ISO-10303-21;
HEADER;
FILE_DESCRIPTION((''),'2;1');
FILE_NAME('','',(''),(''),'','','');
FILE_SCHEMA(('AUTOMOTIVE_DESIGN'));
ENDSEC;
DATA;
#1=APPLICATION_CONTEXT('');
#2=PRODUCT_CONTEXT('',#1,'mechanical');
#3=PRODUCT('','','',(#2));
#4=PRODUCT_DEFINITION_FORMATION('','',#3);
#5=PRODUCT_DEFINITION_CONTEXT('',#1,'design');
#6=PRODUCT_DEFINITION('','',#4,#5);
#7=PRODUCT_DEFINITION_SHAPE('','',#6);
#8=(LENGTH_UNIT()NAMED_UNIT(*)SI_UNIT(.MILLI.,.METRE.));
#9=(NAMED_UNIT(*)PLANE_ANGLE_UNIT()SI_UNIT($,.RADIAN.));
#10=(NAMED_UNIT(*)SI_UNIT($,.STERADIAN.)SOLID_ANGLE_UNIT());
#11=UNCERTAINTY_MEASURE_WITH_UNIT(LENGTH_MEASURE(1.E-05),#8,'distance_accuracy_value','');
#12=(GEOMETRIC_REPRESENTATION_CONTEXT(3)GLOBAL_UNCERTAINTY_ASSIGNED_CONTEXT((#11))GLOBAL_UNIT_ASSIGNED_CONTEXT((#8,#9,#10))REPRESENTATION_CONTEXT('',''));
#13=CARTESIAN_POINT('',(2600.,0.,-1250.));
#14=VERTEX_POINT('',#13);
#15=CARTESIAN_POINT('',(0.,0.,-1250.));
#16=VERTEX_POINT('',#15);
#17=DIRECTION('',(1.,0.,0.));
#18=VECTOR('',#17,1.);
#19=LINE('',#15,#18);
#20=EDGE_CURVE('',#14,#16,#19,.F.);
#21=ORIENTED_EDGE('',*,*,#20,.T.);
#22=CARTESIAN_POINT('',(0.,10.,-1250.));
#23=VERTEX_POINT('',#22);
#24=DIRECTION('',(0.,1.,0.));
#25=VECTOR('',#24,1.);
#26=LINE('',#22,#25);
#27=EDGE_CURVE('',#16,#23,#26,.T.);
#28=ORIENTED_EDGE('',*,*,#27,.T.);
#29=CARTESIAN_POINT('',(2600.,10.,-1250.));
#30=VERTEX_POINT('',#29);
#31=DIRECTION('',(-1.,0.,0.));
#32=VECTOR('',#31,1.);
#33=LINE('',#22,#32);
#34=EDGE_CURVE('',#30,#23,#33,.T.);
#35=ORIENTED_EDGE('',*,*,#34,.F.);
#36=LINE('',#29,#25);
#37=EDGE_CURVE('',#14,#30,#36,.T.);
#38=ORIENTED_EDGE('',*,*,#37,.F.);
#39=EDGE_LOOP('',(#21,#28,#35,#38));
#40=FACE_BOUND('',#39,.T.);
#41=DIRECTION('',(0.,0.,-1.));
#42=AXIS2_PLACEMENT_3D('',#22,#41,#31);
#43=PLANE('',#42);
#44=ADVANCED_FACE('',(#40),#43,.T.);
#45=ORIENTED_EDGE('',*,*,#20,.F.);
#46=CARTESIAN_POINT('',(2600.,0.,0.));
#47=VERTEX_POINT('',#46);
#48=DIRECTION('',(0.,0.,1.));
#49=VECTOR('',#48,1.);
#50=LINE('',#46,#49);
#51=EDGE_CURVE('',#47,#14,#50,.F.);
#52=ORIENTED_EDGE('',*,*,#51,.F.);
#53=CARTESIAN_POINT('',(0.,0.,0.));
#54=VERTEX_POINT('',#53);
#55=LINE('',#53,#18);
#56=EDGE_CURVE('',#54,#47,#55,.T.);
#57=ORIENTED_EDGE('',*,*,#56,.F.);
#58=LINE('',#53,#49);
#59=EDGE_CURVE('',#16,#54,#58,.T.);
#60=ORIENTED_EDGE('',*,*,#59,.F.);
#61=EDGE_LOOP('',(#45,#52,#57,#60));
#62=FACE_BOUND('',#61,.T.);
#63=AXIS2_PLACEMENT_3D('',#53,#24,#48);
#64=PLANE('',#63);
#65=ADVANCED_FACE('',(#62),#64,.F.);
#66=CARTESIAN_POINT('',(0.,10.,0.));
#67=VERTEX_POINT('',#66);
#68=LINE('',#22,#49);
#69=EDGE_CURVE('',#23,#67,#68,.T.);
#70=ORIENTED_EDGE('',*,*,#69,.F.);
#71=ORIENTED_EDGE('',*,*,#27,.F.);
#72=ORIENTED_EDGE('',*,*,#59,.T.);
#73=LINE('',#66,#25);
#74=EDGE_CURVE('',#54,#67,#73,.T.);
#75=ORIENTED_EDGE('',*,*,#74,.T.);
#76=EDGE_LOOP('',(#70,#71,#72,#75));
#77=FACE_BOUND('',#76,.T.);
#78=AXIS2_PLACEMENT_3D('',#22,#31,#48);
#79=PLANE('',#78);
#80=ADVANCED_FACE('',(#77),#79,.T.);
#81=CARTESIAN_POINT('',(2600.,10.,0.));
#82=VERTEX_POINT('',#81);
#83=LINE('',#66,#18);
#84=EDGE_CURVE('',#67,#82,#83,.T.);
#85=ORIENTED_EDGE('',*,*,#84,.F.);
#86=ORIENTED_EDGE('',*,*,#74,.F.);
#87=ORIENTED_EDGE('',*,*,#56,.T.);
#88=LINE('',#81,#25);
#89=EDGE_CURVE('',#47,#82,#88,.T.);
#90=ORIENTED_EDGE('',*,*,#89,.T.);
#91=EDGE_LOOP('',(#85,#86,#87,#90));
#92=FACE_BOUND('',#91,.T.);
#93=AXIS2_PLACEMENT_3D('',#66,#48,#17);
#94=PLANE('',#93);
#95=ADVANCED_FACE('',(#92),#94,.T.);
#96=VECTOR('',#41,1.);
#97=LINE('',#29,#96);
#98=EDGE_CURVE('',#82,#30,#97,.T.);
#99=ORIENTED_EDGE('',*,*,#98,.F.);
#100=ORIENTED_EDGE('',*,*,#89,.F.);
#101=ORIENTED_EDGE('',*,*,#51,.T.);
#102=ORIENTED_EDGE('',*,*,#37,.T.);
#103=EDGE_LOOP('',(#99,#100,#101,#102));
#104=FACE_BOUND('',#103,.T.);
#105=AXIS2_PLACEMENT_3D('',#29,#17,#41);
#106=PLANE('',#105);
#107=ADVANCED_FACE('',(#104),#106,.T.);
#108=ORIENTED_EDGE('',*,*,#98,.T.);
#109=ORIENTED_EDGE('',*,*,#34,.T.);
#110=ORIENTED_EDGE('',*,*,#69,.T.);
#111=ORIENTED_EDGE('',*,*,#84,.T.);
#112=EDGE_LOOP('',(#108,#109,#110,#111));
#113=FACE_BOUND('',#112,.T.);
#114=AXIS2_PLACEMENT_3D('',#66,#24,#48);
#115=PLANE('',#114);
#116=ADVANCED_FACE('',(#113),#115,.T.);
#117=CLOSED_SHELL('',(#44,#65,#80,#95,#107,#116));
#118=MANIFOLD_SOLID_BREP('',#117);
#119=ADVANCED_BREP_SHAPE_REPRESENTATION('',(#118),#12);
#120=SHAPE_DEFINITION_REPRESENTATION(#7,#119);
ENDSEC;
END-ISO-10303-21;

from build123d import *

# Parameters (mm, degrees)
SKETCH2_W      = 2600
SKETCH2_H      = 1250
EXTRUDE1_DEPTH = 10


with BuildPart() as part:
    # Sketch2 → Extrude1 (new body)
    with BuildSketch(Plane(origin=(0, 0, 0), x_dir=(1, 0, 0), z_dir=(0, 1, 0))):
        with Locations((1300, 625)):
            Rectangle(SKETCH2_W, SKETCH2_H)
    extrude(amount=EXTRUDE1_DEPTH)


solid = part.part
